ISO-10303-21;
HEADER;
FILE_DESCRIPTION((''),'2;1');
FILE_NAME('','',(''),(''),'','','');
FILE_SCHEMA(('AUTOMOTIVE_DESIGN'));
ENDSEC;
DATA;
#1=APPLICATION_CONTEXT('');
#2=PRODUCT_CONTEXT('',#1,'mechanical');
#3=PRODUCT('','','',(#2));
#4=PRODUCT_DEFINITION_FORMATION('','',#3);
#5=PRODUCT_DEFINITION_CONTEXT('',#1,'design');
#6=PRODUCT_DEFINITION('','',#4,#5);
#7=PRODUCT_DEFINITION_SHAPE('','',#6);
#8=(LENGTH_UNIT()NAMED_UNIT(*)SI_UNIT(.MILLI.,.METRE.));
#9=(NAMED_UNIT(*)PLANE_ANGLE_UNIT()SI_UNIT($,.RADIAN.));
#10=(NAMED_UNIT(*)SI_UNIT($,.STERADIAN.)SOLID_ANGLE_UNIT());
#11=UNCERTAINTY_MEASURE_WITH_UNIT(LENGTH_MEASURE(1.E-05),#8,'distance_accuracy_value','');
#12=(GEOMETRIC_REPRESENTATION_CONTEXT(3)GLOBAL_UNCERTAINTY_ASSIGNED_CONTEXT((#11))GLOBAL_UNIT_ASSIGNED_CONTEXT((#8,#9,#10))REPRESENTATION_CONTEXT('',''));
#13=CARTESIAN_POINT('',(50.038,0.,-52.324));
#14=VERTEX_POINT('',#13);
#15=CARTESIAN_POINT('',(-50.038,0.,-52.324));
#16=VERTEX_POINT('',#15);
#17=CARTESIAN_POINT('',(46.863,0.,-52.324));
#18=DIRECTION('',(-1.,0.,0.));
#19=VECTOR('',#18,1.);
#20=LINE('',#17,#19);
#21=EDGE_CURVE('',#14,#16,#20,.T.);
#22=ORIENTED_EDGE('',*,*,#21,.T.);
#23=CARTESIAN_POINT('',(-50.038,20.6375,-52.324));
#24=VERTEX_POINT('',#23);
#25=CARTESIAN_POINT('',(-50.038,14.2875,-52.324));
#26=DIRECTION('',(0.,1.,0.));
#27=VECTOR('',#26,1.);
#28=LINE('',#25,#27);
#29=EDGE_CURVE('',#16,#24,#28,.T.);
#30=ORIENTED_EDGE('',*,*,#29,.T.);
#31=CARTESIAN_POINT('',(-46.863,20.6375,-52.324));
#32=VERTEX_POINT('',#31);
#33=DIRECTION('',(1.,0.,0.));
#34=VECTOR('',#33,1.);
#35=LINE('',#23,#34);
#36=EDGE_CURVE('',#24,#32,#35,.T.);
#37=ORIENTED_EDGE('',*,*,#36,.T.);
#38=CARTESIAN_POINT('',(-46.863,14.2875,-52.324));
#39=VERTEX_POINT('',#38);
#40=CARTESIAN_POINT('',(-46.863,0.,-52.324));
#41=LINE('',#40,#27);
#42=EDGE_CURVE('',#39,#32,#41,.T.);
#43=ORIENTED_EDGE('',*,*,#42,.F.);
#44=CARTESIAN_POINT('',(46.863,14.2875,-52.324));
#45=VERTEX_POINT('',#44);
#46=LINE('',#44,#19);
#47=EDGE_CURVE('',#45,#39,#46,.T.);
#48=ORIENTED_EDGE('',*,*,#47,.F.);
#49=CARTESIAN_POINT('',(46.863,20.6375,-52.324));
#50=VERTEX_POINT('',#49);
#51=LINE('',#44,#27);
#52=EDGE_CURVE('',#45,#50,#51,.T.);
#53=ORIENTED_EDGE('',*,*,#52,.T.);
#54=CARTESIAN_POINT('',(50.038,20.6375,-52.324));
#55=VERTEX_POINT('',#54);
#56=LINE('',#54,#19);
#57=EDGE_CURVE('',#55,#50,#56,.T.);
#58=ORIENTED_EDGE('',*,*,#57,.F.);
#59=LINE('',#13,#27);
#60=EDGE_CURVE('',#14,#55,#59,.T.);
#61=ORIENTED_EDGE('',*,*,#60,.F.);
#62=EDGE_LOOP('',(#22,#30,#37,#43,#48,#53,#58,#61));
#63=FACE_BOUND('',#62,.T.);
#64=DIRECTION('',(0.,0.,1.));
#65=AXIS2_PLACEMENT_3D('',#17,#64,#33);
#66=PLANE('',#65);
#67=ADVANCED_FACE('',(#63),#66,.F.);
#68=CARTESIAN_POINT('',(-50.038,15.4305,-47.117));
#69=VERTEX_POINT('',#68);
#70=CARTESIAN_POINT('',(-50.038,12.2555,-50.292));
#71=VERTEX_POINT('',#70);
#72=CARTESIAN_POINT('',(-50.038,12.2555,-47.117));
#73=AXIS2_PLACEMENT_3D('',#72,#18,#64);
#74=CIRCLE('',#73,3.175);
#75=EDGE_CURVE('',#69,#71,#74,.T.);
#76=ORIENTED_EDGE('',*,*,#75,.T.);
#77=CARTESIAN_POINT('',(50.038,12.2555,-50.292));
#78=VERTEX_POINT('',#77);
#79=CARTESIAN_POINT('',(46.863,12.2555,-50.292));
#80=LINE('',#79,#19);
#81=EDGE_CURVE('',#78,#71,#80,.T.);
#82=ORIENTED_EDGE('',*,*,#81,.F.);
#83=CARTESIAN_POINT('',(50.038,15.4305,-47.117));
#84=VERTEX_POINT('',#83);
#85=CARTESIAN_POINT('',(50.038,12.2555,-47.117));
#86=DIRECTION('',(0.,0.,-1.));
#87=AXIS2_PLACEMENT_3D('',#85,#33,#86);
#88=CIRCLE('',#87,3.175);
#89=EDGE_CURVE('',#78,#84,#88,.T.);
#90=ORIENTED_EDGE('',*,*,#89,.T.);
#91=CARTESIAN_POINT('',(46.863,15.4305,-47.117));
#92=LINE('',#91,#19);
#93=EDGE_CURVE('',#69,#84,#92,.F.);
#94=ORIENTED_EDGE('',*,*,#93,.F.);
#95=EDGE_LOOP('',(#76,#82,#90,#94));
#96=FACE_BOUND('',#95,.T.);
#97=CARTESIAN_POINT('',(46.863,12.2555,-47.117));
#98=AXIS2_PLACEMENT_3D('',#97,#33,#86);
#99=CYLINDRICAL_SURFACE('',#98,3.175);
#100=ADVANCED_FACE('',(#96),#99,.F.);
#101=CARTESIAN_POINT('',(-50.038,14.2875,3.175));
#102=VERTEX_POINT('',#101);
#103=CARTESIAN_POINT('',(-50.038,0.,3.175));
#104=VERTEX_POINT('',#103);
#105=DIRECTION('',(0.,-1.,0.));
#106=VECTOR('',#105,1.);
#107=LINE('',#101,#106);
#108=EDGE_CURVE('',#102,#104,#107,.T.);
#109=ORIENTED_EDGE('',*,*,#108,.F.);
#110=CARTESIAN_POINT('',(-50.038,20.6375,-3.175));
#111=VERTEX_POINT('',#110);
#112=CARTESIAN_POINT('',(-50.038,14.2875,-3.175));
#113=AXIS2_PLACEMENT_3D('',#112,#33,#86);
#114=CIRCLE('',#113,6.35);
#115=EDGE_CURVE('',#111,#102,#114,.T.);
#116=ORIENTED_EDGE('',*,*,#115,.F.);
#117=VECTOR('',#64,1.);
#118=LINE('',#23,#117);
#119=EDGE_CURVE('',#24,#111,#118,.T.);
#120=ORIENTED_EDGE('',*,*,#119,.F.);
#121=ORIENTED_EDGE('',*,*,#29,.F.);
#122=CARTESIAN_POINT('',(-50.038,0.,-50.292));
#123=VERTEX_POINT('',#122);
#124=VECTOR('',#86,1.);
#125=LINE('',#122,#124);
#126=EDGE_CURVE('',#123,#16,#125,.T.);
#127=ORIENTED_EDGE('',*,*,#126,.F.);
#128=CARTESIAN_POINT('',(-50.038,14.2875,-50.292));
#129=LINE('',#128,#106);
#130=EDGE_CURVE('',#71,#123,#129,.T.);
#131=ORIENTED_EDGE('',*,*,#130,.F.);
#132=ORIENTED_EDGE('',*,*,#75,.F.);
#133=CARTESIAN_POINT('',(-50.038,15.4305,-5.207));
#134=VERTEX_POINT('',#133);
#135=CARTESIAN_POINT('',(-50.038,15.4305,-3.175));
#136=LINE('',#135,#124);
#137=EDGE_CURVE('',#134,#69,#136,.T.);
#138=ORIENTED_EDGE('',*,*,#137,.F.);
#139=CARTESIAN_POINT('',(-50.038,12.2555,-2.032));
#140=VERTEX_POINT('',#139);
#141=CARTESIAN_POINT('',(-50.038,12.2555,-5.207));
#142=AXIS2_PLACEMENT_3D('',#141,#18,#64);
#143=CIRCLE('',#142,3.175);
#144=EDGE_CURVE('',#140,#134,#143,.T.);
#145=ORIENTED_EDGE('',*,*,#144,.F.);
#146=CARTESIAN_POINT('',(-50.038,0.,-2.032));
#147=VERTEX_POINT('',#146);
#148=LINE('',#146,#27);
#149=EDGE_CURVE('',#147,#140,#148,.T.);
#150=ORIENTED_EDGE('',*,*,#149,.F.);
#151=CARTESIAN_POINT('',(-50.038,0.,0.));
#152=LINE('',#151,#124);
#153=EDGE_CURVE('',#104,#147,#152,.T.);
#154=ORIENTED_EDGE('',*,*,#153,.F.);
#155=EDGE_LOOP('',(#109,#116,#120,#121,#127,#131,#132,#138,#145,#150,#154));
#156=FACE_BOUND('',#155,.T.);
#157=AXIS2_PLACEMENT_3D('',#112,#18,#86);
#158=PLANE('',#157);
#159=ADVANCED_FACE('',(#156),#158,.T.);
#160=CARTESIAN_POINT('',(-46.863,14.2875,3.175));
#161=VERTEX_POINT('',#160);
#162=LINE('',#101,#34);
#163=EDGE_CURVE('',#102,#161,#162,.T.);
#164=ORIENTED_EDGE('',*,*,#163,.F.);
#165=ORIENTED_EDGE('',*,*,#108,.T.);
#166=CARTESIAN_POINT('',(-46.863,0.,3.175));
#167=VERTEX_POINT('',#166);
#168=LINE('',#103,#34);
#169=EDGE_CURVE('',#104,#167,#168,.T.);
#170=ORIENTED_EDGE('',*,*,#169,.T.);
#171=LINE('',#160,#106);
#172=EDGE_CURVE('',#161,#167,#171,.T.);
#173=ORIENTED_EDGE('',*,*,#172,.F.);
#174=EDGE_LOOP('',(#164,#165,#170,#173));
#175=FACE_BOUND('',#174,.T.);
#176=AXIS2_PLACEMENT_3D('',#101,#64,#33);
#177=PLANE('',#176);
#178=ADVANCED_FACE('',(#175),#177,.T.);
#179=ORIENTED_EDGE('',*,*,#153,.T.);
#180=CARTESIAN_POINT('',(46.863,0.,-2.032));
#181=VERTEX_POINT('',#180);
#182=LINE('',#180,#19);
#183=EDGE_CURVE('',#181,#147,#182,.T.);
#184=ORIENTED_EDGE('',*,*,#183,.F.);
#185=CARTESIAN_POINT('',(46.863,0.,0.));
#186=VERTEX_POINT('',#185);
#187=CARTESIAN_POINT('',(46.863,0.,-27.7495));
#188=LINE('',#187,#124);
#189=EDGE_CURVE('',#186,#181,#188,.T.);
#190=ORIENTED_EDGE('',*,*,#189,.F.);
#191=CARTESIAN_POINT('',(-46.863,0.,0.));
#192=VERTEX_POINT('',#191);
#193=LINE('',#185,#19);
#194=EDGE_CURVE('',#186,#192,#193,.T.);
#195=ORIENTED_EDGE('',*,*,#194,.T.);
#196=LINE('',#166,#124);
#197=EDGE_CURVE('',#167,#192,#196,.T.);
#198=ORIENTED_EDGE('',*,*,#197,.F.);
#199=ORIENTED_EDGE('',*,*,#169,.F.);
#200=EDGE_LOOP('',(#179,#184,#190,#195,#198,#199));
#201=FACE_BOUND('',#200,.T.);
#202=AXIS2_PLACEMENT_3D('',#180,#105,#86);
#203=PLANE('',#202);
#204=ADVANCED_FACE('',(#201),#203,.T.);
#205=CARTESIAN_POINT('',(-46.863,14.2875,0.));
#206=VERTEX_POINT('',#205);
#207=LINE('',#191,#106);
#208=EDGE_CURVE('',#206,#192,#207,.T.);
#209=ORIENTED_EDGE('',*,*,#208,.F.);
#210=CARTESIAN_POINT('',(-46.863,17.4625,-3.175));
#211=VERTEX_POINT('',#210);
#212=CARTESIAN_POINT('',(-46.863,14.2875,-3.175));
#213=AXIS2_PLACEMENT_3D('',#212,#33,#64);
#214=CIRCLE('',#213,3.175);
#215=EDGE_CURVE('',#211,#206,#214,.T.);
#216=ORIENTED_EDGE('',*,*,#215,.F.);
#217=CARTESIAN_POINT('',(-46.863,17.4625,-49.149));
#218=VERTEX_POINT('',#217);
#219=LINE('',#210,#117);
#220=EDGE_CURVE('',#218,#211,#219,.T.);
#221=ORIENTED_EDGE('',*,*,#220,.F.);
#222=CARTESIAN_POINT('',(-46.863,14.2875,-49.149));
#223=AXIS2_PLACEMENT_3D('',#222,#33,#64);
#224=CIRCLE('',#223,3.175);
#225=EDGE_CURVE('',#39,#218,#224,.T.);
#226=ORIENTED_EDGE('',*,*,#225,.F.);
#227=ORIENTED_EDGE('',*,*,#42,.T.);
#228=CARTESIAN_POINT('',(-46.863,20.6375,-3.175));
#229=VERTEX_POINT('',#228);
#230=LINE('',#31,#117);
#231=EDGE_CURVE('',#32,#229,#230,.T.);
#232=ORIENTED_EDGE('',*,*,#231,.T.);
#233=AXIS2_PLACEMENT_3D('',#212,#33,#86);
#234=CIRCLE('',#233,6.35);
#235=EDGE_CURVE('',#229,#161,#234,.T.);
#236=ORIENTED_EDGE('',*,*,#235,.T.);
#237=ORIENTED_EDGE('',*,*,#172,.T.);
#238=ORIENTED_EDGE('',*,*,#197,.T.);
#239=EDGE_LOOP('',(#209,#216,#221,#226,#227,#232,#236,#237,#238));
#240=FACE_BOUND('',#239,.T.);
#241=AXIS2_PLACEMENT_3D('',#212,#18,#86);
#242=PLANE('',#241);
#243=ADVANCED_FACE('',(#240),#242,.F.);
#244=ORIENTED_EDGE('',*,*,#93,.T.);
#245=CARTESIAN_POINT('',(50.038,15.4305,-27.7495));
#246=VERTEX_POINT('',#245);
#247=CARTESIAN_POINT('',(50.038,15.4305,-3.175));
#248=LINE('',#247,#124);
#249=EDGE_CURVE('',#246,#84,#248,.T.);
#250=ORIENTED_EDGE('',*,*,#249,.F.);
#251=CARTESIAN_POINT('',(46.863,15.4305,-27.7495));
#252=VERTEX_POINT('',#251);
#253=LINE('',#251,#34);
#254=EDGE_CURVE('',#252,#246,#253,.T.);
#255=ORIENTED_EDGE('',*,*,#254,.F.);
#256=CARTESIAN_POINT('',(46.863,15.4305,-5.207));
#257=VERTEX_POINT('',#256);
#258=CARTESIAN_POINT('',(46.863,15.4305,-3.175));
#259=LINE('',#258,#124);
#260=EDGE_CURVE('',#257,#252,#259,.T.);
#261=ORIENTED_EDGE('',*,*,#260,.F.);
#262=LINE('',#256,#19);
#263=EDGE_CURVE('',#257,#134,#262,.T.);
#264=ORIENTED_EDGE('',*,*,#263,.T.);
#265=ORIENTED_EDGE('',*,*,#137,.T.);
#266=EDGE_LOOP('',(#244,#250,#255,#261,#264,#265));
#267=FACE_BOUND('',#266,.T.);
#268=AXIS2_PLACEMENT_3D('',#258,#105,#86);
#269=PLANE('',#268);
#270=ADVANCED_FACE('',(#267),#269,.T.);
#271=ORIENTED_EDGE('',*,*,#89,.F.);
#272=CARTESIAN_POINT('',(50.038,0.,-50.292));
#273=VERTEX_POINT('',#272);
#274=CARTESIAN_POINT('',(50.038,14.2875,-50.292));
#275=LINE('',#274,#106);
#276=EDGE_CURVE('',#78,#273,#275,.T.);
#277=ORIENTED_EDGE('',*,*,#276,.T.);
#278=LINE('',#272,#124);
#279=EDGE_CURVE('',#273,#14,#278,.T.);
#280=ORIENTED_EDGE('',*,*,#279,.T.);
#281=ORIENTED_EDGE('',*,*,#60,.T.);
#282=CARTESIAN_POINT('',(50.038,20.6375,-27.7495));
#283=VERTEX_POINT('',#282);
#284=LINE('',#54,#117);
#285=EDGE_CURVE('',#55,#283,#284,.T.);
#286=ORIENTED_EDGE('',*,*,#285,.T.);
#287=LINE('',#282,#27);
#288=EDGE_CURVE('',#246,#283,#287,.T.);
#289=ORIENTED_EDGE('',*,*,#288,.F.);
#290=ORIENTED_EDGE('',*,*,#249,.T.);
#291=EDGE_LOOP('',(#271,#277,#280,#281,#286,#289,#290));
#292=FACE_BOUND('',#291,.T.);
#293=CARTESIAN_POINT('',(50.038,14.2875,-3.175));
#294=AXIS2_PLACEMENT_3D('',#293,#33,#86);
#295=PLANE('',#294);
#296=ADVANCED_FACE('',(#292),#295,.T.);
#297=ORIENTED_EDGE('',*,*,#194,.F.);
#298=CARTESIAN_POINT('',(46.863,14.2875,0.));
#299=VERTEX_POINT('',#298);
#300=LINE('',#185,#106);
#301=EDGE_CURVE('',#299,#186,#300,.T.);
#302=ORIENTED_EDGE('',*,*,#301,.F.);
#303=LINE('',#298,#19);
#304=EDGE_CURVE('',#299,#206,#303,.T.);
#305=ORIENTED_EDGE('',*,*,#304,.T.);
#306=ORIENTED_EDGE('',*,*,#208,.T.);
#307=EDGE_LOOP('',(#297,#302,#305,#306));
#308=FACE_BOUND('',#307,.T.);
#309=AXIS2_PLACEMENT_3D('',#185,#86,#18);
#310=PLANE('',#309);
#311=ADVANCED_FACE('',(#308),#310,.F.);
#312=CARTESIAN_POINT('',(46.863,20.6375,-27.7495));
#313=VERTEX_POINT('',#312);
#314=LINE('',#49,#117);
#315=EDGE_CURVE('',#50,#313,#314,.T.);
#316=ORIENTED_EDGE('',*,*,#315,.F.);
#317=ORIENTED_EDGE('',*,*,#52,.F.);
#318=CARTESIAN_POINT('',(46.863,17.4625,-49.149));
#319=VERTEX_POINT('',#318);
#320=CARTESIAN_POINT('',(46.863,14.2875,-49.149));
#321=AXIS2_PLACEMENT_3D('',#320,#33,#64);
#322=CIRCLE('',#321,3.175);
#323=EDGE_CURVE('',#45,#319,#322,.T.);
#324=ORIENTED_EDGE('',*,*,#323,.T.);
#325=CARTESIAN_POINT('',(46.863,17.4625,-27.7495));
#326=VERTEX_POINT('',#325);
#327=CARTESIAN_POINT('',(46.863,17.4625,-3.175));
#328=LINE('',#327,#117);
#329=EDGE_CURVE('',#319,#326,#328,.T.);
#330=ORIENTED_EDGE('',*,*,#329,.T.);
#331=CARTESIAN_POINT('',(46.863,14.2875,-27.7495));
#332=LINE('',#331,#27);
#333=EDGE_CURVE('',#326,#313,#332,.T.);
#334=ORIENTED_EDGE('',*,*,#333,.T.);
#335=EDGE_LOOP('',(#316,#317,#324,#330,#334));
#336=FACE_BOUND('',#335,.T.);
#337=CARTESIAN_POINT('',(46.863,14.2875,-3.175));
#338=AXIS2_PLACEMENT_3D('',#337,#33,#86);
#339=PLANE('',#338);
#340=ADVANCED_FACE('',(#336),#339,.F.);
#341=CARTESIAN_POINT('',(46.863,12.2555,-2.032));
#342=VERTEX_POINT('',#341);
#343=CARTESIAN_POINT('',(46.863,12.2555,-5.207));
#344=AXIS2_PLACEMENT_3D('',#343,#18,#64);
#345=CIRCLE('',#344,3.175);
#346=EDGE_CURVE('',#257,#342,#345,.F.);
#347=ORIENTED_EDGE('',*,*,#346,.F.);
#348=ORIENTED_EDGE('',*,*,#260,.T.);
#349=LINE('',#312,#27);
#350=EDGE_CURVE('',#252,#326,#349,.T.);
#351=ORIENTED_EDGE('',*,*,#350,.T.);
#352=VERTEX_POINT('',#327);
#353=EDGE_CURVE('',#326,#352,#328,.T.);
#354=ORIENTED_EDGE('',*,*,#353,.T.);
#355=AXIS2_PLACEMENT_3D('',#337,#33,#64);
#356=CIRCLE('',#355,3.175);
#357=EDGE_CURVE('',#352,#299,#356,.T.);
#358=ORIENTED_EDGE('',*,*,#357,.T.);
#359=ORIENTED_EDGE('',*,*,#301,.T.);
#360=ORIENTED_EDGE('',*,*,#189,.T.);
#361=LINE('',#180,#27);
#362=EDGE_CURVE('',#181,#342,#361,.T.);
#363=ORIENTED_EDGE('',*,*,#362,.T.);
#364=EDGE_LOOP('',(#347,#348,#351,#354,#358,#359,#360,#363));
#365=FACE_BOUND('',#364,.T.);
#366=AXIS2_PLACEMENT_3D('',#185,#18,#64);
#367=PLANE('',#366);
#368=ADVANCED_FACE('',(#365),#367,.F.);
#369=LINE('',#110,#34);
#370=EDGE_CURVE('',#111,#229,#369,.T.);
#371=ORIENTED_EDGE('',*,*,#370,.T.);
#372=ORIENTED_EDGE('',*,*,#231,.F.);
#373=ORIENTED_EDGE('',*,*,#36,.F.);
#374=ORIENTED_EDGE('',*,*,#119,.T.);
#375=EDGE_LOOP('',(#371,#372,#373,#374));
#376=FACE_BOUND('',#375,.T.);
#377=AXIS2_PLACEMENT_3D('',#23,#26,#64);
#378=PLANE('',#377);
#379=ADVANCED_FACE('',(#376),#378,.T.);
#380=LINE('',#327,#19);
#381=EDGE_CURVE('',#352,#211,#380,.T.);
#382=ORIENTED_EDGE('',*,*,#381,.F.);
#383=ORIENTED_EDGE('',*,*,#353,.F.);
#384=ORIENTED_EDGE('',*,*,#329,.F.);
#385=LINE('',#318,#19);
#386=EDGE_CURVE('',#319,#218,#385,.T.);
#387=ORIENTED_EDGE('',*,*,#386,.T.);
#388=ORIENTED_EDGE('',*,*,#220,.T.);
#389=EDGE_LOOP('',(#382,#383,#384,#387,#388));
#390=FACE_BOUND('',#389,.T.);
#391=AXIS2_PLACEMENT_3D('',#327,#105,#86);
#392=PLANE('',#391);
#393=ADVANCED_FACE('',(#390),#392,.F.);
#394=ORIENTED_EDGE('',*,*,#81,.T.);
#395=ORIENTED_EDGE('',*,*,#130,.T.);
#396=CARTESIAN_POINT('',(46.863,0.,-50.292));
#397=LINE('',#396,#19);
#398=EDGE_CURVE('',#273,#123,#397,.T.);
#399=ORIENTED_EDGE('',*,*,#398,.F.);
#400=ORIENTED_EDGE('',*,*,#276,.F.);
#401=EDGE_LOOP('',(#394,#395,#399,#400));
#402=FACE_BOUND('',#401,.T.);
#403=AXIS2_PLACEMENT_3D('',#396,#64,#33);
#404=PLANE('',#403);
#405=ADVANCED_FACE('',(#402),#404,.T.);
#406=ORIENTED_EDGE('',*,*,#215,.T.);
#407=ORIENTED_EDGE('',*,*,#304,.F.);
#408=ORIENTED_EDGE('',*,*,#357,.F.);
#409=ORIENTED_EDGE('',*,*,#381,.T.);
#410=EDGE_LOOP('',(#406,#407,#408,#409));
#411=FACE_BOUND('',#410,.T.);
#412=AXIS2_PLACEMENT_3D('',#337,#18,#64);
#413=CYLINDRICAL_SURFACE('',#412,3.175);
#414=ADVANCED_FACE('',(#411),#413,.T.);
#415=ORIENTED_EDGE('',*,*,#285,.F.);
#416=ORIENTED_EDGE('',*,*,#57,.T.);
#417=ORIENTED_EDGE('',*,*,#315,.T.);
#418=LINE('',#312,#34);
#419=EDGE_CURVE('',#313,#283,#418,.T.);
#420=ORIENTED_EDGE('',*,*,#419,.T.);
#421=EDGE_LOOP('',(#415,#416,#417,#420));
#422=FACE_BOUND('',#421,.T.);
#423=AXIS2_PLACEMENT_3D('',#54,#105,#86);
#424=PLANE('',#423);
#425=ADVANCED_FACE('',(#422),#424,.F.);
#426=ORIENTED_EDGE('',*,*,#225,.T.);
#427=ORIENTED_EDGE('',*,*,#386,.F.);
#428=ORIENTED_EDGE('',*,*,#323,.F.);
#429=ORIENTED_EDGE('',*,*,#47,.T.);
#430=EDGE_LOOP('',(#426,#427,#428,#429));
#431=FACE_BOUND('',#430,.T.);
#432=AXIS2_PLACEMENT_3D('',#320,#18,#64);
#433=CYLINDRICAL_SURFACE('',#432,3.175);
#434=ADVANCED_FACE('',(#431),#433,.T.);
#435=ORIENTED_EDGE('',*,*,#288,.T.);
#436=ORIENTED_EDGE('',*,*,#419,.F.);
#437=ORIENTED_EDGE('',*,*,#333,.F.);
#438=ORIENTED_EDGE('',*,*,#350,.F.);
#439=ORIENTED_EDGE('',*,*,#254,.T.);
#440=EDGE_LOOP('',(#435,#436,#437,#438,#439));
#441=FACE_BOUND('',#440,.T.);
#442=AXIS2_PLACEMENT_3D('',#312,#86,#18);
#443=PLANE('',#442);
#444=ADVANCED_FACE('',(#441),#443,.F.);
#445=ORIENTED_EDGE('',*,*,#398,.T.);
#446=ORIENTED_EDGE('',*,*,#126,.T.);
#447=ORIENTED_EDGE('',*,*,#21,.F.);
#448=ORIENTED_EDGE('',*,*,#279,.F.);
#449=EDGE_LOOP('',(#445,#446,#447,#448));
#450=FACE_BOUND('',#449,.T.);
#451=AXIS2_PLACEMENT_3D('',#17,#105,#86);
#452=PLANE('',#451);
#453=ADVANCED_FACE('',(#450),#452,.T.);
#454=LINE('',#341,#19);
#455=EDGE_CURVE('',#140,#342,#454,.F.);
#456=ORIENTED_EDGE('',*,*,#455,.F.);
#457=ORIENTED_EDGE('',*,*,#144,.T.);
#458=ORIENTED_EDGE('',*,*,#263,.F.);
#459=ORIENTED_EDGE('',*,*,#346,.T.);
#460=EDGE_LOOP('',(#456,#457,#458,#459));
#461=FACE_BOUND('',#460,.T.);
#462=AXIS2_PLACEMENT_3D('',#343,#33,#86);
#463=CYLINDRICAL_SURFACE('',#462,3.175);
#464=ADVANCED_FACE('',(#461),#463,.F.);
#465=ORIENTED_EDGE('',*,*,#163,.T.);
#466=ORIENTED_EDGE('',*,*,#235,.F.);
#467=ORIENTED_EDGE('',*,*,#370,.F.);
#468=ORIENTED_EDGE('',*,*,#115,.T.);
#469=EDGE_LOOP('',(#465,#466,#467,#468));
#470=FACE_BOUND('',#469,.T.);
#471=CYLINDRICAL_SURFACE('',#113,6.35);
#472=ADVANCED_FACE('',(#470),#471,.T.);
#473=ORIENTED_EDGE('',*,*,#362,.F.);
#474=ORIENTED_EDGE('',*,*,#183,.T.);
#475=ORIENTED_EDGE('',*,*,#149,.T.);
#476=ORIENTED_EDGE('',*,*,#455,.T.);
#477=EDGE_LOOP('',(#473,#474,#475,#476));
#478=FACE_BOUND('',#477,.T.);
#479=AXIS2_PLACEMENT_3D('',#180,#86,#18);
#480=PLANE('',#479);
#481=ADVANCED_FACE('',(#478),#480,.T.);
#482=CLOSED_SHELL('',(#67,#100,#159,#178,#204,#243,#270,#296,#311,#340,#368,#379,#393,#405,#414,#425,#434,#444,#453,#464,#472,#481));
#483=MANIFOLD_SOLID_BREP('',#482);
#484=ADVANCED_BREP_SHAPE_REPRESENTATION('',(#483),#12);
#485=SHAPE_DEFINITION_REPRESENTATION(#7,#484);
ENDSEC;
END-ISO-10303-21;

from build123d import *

# Parameters (mm, degrees)
EXTRUDE_THIN1_DEPTH = 46.863
BOSS_EXTRUDE1_START = 3.175
BOSS_EXTRUDE1_DEPTH = 3.175
FILLET1_START       = -50.038
FILLET1_DEPTH       = 100.076
FILLET2_START       = -50.038
FILLET2_DEPTH       = 100.076
SKETCH4_W           = 30.9245
SKETCH4_H           = 20.6375
CUT_EXTRUDE1_DEPTH  = 3.175


with BuildPart() as part:
    # Sketch2 → Extrude-Thin1 (new, symmetric)
    with BuildSketch(Plane(origin=(0, 0, 0), x_dir=(0, 0, -1), z_dir=(1, 0, 0))):
        with BuildLine():
            Line((0, 0), (0, 14.2875))
            ThreePointArc((0, 14.2875), (0.92993597, 16.53256403), (3.175, 17.4625))
            Line((3.175, 17.4625), (49.149, 17.4625))
            ThreePointArc((49.149, 17.4625), (51.39406403, 16.53256403), (52.324, 14.2875))
            Line((52.324, 14.2875), (52.324, 0))
            Line((52.324, 0), (50.292, 0))
            Line((50.292, 0), (50.292, 14.2875))
            ThreePointArc((50.292, 14.2875), (49.957223051, 15.095723051), (49.149, 15.4305))
            Line((49.149, 15.4305), (3.175, 15.4305))
            ThreePointArc((3.175, 15.4305), (2.366776949, 15.095723051), (2.032, 14.2875))
            Line((2.032, 14.2875), (2.032, 0))
            Line((2.032, 0), (0, 0))
        make_face()
    extrude(amount=EXTRUDE_THIN1_DEPTH, both=True)

    # Sketch3 → Boss-Extrude1 (add)
    with BuildSketch(Plane(origin=(46.863, 0, 0), x_dir=(0, 0, -1), z_dir=(1, 0, 0)).offset(BOSS_EXTRUDE1_START)):
        with BuildLine():
            Line((52.324, 20.6375), (3.175, 20.6375))
            ThreePointArc((3.175, 20.6375), (-1.315128061, 18.777628061), (-3.175, 14.2875))
            Line((-3.175, 14.2875), (-3.175, 0))
            Line((-3.175, 0), (0, 0))
            Line((0, 0), (2.032, 0))
            Line((2.032, 0), (2.032, 14.2875))
            ThreePointArc((2.032, 14.2875), (2.366776949, 15.095723051), (3.175, 15.4305))
            Line((3.175, 15.4305), (49.149, 15.4305))
            ThreePointArc((49.149, 15.4305), (49.957223051, 15.095723051), (50.292, 14.2875))
            Line((50.292, 14.2875), (50.292, 0))
            Line((50.292, 0), (52.324, 0))
            Line((52.324, 0), (52.324, 14.2875))
            Line((52.324, 14.2875), (52.324, 20.6375))
        make_face()
    boss_extrude1 = extrude(amount=-BOSS_EXTRUDE1_DEPTH)

    # Mirror1: Boss-Extrude1 across plane
    add(boss_extrude1.mirror(Plane(origin=(0, 0, 0), x_dir=(0, 0, 1), z_dir=(1, 0, 0))))

    # Fillet1: read off the stored shape, not the designer's step
    # Fillet1 outline → Fillet1 (add)
    with BuildSketch(Plane.YZ.offset(FILLET1_START)):
        with BuildLine():
            ThreePointArc((15.4305, -47.117), (14.50056403, -49.36206403), (12.2555, -50.292))
            Line((12.2555, -50.292), (14.2875, -50.292))
            ThreePointArc((14.2875, -50.292), (15.095723051, -49.957223051), (15.4305, -49.149))
            Line((15.4305, -49.149), (15.4305, -47.117))
        make_face()
    extrude(amount=FILLET1_DEPTH)

    # Fillet2: read off the stored shape, not the designer's step
    # Fillet2 outline → Fillet2 (add)
    with BuildSketch(Plane.YZ.offset(FILLET2_START)):
        with BuildLine():
            ThreePointArc((12.2555, -2.032), (14.50056403, -2.96193597), (15.4305, -5.207))
            Line((15.4305, -5.207), (15.4305, -3.175))
            ThreePointArc((15.4305, -3.175), (15.095723051, -2.366776949), (14.2875, -2.032))
            Line((14.2875, -2.032), (12.2555, -2.032))
        make_face()
    extrude(amount=FILLET2_DEPTH)

    # Sketch4 → Cut-Extrude1 (cut)
    with BuildSketch(Plane(origin=(50.038, 0, 0), x_dir=(0, 0, -1), z_dir=(1, 0, 0))):
        with Locations((12.28725, 10.31875)):
            Rectangle(SKETCH4_W, SKETCH4_H)
    extrude(amount=-CUT_EXTRUDE1_DEPTH, mode=Mode.SUBTRACT)


solid = part.part
